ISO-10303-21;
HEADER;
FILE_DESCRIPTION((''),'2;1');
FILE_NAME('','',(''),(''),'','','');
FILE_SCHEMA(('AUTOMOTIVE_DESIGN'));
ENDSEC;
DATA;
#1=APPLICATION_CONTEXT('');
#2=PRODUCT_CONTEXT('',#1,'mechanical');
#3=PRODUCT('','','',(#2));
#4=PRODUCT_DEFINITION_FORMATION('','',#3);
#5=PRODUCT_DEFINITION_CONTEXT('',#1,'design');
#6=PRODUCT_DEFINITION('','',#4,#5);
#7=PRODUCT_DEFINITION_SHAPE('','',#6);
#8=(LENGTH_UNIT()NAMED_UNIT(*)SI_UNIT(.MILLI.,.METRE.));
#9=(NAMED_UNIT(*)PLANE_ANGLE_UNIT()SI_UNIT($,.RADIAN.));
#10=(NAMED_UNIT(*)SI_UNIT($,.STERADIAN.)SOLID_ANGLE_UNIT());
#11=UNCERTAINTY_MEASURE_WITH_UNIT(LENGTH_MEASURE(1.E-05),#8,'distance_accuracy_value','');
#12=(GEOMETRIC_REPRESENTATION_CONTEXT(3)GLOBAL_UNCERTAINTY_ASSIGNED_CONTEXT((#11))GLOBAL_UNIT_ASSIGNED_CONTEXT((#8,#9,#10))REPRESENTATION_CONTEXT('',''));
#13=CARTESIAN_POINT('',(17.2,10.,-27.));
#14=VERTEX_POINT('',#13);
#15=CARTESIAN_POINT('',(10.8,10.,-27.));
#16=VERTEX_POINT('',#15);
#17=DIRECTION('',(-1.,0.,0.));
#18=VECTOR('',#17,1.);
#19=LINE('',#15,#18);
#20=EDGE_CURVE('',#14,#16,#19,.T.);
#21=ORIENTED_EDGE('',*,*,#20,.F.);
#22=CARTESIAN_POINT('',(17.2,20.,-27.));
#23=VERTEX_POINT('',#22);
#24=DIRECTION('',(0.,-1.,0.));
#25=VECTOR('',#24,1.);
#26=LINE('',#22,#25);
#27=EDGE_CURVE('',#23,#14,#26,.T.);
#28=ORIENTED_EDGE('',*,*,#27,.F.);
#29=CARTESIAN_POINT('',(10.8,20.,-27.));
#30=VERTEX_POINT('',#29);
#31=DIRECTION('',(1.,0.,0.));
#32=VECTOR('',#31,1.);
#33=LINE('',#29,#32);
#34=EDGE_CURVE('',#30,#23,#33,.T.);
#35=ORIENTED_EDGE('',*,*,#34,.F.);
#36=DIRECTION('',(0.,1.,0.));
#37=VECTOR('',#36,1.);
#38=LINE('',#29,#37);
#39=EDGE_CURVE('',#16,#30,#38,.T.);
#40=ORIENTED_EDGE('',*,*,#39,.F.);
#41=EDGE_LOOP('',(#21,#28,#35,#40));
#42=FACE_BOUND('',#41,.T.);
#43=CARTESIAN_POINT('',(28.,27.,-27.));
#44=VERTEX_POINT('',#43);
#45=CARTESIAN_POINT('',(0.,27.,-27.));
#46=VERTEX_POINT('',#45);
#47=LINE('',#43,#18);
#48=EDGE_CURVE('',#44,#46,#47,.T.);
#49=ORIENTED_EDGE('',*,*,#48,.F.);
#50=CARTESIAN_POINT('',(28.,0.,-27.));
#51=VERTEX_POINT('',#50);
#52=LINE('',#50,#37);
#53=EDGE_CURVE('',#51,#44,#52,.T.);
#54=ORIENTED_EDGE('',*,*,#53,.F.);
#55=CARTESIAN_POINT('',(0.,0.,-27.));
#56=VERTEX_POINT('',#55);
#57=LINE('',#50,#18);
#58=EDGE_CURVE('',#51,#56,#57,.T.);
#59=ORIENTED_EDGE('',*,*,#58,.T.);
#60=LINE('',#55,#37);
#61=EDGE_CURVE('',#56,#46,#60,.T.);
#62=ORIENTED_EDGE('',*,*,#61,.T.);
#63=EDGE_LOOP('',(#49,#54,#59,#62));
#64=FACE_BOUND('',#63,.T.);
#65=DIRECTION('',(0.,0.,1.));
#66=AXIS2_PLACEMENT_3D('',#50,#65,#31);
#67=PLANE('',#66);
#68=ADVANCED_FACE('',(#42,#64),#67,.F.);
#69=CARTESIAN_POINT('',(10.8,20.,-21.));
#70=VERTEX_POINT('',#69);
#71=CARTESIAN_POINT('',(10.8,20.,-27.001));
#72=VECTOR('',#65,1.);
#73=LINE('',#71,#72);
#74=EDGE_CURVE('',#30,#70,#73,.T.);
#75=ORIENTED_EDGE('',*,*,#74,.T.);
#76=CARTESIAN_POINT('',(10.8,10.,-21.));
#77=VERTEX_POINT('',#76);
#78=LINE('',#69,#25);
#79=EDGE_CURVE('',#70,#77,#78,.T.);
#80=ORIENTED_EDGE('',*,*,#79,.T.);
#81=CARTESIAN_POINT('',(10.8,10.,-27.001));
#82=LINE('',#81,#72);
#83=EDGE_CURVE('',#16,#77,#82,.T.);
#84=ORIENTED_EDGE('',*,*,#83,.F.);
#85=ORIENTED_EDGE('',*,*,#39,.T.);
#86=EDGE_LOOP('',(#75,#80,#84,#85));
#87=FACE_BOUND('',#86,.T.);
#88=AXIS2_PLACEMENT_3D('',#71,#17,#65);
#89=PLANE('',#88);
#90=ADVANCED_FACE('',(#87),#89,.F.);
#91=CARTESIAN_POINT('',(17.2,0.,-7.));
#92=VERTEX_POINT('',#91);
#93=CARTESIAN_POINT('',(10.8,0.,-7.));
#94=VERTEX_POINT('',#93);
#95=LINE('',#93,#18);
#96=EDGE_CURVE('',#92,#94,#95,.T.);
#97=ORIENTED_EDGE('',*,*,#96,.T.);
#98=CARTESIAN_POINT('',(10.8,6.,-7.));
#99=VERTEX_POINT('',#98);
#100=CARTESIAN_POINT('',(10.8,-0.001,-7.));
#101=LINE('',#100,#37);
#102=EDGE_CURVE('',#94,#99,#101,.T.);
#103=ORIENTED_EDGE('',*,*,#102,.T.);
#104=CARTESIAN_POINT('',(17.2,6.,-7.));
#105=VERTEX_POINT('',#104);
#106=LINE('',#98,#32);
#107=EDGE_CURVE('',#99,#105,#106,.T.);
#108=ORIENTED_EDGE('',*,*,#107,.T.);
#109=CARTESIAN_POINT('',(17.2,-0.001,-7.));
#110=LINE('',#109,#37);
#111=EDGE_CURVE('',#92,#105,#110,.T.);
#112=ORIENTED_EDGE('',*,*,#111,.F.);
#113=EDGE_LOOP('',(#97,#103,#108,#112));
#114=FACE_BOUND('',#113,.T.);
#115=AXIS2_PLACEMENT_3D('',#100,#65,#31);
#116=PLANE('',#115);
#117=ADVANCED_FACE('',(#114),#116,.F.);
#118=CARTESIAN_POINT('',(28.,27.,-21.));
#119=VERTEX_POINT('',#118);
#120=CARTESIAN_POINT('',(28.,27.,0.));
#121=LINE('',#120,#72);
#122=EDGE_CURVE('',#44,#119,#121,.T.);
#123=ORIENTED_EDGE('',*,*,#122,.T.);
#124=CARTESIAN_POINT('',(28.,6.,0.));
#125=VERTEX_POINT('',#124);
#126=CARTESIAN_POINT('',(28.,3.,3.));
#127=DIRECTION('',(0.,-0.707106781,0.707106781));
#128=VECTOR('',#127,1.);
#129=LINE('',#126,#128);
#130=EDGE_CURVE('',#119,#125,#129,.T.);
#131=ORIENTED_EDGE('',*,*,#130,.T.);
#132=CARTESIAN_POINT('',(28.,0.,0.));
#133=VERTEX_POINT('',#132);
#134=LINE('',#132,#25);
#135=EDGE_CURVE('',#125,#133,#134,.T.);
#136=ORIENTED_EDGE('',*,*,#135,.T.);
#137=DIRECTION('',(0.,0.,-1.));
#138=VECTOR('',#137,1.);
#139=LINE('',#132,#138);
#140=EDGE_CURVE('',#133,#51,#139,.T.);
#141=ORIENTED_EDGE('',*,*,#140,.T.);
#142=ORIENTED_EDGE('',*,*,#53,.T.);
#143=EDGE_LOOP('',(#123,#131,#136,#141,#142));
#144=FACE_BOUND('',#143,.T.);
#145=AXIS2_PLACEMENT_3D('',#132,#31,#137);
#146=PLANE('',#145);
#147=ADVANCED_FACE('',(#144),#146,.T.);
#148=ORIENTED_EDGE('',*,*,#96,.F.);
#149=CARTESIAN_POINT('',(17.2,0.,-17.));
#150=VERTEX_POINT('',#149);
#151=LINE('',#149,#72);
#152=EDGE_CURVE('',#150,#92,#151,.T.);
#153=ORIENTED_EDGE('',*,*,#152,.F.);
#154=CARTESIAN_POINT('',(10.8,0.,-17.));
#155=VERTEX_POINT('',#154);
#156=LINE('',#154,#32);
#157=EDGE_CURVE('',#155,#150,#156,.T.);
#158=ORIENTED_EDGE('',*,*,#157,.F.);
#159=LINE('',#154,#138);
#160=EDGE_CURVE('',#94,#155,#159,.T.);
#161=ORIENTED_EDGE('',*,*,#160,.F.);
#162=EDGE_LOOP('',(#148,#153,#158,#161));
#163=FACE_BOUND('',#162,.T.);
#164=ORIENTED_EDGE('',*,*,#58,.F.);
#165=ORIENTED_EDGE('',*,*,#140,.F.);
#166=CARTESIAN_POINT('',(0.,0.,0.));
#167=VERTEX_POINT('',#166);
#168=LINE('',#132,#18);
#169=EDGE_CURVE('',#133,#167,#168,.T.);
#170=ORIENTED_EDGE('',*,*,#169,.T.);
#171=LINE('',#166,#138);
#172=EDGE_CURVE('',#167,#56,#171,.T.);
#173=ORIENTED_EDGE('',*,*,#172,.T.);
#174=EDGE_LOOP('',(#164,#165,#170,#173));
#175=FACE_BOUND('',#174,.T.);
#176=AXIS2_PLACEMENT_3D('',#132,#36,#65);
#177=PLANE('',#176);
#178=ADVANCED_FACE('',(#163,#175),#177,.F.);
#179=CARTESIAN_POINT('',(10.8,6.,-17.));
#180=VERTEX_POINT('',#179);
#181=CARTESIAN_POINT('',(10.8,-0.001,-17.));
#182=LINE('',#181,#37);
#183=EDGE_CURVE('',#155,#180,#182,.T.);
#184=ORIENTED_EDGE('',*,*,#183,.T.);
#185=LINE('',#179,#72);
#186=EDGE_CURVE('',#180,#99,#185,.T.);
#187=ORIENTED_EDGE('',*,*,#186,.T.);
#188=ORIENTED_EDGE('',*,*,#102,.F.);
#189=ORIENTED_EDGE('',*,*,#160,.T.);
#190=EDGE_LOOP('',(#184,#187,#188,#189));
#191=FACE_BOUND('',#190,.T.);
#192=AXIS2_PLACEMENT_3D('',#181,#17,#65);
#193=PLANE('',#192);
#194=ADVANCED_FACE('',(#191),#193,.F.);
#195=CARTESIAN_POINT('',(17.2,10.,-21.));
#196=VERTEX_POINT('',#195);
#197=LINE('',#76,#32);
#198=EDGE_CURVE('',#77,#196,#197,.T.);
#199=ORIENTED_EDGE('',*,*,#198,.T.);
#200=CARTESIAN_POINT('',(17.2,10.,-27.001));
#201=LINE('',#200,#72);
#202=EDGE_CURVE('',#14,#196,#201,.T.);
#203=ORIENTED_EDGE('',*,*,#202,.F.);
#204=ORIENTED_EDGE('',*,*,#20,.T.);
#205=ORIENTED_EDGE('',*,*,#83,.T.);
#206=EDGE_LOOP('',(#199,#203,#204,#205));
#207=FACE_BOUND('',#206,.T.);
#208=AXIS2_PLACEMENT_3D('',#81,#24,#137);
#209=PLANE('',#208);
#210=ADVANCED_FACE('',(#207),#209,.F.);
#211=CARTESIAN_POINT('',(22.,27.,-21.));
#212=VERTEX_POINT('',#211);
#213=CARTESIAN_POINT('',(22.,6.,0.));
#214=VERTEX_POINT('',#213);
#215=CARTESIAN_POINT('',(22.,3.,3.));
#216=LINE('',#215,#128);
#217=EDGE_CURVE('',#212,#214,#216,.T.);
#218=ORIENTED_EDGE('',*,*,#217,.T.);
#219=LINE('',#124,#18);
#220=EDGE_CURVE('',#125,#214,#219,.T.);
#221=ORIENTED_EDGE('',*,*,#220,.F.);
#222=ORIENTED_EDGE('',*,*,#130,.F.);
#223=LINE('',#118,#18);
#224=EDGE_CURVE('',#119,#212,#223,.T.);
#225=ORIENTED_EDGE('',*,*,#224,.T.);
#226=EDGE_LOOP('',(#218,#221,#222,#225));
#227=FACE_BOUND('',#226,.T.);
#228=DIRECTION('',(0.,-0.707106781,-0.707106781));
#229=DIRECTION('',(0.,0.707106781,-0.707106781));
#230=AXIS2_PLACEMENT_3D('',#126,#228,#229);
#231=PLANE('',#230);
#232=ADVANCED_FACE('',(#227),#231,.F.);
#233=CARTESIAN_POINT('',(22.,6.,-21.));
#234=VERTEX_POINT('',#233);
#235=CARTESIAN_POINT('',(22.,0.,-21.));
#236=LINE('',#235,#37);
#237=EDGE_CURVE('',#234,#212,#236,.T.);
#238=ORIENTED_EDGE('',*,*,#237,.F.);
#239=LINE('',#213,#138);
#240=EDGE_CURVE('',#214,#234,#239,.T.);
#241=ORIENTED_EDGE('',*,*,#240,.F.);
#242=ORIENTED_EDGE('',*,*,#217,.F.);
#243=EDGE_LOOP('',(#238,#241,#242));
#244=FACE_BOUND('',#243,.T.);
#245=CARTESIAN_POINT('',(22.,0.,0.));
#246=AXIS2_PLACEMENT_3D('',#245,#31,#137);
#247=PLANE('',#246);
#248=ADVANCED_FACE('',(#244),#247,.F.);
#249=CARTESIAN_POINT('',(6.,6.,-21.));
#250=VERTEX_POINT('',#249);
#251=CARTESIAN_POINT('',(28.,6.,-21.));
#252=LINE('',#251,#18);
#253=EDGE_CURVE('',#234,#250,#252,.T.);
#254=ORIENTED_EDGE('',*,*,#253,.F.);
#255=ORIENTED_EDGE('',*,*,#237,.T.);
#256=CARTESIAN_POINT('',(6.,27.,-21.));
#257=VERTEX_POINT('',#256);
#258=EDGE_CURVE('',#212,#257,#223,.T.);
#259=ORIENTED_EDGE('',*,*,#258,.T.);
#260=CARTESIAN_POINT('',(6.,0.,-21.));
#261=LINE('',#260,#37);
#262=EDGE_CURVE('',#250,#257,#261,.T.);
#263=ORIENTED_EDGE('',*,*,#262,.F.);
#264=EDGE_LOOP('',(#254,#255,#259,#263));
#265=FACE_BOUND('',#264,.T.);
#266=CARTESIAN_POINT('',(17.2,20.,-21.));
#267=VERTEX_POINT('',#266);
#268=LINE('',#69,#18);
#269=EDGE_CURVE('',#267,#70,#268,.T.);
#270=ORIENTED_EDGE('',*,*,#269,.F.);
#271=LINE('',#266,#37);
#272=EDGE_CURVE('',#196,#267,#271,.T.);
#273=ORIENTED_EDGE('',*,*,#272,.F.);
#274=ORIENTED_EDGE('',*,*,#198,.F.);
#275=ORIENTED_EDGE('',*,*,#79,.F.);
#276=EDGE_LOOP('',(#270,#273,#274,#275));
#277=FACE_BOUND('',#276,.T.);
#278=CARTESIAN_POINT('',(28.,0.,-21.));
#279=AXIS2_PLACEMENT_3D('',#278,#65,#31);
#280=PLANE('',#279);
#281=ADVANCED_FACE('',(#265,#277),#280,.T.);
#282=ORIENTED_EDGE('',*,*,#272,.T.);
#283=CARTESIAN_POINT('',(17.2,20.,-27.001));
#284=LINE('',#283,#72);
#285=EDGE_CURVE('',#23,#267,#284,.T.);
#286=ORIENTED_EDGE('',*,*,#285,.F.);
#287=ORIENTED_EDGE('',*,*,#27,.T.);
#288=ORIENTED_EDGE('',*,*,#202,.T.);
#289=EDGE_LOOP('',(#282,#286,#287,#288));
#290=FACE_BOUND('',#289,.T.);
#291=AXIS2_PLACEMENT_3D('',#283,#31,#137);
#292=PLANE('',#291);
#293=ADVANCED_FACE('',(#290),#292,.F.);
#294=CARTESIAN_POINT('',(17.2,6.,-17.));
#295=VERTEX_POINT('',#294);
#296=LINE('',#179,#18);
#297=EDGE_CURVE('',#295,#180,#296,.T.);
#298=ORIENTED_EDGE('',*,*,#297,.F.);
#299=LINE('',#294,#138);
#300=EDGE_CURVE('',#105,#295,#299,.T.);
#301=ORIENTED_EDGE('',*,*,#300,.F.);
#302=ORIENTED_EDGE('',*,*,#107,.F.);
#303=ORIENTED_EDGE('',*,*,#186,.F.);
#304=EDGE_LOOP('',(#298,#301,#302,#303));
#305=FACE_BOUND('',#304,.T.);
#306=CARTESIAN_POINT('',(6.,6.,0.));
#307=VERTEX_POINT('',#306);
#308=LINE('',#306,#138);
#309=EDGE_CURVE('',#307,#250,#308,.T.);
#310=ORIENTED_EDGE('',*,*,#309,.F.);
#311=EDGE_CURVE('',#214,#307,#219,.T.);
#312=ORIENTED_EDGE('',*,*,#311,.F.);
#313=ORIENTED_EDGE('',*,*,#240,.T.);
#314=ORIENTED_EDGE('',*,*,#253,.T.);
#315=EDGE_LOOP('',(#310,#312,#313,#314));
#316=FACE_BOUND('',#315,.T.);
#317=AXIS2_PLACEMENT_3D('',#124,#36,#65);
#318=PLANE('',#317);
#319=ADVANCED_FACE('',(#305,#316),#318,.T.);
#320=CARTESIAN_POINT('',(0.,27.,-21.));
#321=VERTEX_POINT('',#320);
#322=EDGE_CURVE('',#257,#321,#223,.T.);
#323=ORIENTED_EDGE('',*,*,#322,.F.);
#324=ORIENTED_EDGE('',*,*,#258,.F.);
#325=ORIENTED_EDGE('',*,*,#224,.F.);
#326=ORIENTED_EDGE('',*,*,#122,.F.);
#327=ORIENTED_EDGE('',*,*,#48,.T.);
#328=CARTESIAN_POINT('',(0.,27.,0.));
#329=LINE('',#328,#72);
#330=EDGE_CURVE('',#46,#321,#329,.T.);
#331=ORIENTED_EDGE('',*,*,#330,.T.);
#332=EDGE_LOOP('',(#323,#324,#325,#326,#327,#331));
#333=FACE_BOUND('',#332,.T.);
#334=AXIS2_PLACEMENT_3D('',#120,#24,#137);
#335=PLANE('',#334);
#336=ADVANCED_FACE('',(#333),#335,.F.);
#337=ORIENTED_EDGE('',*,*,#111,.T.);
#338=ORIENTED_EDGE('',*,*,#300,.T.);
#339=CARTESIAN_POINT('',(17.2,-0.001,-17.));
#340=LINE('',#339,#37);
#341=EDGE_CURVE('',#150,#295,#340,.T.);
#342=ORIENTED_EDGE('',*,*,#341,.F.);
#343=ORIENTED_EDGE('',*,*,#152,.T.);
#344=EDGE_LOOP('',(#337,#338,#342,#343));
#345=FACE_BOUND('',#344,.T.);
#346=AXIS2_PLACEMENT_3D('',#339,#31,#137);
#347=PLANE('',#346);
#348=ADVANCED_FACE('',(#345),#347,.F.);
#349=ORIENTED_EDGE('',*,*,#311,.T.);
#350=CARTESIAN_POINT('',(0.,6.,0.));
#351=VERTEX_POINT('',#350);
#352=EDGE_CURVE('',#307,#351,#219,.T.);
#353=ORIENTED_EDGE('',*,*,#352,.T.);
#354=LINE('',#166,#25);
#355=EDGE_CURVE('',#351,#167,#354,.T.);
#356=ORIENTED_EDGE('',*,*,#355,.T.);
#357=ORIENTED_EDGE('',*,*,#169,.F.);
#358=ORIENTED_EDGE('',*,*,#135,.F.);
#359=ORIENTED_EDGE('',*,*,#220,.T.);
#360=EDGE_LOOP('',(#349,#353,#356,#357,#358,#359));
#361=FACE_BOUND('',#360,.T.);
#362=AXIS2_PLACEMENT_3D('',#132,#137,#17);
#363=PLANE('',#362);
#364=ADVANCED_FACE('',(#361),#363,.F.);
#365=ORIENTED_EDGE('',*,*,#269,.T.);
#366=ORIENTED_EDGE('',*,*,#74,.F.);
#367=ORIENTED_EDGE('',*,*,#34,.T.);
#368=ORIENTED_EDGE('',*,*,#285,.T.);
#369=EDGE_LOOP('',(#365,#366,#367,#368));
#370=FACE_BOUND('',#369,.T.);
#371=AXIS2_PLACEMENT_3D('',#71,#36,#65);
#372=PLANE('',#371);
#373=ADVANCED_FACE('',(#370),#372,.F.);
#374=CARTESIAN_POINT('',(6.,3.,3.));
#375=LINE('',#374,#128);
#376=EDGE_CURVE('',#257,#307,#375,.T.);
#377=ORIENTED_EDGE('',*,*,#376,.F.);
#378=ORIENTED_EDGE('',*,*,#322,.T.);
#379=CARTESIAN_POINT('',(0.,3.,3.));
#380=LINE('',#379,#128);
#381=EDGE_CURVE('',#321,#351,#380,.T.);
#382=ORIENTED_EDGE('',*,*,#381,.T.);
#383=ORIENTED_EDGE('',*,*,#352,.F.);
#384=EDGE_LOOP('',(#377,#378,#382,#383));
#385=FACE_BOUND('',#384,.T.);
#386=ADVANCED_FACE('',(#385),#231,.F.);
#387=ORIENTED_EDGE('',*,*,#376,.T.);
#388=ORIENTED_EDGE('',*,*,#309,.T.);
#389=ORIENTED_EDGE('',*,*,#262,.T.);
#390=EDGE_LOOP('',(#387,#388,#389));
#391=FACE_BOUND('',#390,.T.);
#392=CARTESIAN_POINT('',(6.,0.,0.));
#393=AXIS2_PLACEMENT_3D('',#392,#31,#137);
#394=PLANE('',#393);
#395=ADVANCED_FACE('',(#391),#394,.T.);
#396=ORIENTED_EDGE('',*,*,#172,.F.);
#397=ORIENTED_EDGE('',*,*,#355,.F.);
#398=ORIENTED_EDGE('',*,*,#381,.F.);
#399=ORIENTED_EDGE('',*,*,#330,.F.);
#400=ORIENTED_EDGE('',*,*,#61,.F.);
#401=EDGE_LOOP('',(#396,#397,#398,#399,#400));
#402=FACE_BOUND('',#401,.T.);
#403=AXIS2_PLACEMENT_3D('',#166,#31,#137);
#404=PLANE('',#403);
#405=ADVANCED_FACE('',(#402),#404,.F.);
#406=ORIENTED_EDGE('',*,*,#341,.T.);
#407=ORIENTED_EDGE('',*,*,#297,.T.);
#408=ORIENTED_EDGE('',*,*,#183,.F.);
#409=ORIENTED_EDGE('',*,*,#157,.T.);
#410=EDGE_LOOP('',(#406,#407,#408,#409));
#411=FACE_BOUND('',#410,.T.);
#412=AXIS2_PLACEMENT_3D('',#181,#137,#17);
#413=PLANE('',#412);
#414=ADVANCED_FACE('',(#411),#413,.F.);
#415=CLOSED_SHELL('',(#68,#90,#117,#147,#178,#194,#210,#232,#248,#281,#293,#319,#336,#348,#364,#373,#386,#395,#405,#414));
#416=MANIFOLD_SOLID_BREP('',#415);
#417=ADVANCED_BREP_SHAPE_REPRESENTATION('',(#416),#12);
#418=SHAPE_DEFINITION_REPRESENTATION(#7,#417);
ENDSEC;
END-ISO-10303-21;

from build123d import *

# Parameters (mm, degrees)
SALIENTE_EXTRUIR1_DEPTH = 28
VACIADO2_START          = 6
VACIADO2_OUTLINE_W      = 16
VACIADO2_OUTLINE_H      = 23
VACIADO2_DEPTH          = 21
CORTAR_EXTRUIR1_REACH   = 46.204
CROQUIS2_W              = 6.4
CROQUIS2_H              = 10
CORTAR_EXTRUIR2_REACH   = 46.204
CROQUIS4_W              = 6.4
CROQUIS4_H              = 10


# Read off the part's stored shape, not the designer's step: Vaciado2
with BuildPart() as part:
    # Croquis1 → Saliente-Extruir1 (new body)
    with BuildSketch(Plane(origin=(0, 0, 0), x_dir=(0, 0, -1), z_dir=(1, 0, 0))):
        Polygon((0, 0), (27, 0), (27, 27), (21, 27), (0, 6), align=None)
    extrude(amount=SALIENTE_EXTRUIR1_DEPTH)

    # Vaciado2 outline → Vaciado2 (cut)
    with BuildSketch(Plane(origin=(0, 0, 0), x_dir=(1, 0, 0), z_dir=(0, 1, 0)).offset(VACIADO2_START)):
        with Locations((14, 9.5)):
            Rectangle(VACIADO2_OUTLINE_W, VACIADO2_OUTLINE_H)
    extrude(amount=VACIADO2_DEPTH, mode=Mode.SUBTRACT)

    # Croquis2 → Cortar-Extruir1 (cut, up to next)
    with BuildSketch(Plane.XY.offset(-21), mode=Mode.PRIVATE) as cortar_extruir1_sk1:
        with Locations((14, 15)):
            Rectangle(CROQUIS2_W, CROQUIS2_H)
    cortar_extruir1_tool1 = extrude(cortar_extruir1_sk1.sketch, amount=-CORTAR_EXTRUIR1_REACH, mode=Mode.PRIVATE) & part.part
    add(cortar_extruir1_tool1.solids().sort_by_distance((14, 15, -21))[0], mode=Mode.SUBTRACT)

    # Croquis4 → Cortar-Extruir2 (cut, up to next)
    with BuildSketch(Plane(origin=(0, 6, 0), x_dir=(1, 0, 0), z_dir=(0, 1, 0)), mode=Mode.PRIVATE) as cortar_extruir2_sk1:
        with Locations((14, 12)):
            Rectangle(CROQUIS4_W, CROQUIS4_H)
    cortar_extruir2_tool1 = extrude(cortar_extruir2_sk1.sketch, amount=-CORTAR_EXTRUIR2_REACH, mode=Mode.PRIVATE) & part.part
    add(cortar_extruir2_tool1.solids().sort_by_distance((14, 6, -12))[0], mode=Mode.SUBTRACT)


solid = part.part
